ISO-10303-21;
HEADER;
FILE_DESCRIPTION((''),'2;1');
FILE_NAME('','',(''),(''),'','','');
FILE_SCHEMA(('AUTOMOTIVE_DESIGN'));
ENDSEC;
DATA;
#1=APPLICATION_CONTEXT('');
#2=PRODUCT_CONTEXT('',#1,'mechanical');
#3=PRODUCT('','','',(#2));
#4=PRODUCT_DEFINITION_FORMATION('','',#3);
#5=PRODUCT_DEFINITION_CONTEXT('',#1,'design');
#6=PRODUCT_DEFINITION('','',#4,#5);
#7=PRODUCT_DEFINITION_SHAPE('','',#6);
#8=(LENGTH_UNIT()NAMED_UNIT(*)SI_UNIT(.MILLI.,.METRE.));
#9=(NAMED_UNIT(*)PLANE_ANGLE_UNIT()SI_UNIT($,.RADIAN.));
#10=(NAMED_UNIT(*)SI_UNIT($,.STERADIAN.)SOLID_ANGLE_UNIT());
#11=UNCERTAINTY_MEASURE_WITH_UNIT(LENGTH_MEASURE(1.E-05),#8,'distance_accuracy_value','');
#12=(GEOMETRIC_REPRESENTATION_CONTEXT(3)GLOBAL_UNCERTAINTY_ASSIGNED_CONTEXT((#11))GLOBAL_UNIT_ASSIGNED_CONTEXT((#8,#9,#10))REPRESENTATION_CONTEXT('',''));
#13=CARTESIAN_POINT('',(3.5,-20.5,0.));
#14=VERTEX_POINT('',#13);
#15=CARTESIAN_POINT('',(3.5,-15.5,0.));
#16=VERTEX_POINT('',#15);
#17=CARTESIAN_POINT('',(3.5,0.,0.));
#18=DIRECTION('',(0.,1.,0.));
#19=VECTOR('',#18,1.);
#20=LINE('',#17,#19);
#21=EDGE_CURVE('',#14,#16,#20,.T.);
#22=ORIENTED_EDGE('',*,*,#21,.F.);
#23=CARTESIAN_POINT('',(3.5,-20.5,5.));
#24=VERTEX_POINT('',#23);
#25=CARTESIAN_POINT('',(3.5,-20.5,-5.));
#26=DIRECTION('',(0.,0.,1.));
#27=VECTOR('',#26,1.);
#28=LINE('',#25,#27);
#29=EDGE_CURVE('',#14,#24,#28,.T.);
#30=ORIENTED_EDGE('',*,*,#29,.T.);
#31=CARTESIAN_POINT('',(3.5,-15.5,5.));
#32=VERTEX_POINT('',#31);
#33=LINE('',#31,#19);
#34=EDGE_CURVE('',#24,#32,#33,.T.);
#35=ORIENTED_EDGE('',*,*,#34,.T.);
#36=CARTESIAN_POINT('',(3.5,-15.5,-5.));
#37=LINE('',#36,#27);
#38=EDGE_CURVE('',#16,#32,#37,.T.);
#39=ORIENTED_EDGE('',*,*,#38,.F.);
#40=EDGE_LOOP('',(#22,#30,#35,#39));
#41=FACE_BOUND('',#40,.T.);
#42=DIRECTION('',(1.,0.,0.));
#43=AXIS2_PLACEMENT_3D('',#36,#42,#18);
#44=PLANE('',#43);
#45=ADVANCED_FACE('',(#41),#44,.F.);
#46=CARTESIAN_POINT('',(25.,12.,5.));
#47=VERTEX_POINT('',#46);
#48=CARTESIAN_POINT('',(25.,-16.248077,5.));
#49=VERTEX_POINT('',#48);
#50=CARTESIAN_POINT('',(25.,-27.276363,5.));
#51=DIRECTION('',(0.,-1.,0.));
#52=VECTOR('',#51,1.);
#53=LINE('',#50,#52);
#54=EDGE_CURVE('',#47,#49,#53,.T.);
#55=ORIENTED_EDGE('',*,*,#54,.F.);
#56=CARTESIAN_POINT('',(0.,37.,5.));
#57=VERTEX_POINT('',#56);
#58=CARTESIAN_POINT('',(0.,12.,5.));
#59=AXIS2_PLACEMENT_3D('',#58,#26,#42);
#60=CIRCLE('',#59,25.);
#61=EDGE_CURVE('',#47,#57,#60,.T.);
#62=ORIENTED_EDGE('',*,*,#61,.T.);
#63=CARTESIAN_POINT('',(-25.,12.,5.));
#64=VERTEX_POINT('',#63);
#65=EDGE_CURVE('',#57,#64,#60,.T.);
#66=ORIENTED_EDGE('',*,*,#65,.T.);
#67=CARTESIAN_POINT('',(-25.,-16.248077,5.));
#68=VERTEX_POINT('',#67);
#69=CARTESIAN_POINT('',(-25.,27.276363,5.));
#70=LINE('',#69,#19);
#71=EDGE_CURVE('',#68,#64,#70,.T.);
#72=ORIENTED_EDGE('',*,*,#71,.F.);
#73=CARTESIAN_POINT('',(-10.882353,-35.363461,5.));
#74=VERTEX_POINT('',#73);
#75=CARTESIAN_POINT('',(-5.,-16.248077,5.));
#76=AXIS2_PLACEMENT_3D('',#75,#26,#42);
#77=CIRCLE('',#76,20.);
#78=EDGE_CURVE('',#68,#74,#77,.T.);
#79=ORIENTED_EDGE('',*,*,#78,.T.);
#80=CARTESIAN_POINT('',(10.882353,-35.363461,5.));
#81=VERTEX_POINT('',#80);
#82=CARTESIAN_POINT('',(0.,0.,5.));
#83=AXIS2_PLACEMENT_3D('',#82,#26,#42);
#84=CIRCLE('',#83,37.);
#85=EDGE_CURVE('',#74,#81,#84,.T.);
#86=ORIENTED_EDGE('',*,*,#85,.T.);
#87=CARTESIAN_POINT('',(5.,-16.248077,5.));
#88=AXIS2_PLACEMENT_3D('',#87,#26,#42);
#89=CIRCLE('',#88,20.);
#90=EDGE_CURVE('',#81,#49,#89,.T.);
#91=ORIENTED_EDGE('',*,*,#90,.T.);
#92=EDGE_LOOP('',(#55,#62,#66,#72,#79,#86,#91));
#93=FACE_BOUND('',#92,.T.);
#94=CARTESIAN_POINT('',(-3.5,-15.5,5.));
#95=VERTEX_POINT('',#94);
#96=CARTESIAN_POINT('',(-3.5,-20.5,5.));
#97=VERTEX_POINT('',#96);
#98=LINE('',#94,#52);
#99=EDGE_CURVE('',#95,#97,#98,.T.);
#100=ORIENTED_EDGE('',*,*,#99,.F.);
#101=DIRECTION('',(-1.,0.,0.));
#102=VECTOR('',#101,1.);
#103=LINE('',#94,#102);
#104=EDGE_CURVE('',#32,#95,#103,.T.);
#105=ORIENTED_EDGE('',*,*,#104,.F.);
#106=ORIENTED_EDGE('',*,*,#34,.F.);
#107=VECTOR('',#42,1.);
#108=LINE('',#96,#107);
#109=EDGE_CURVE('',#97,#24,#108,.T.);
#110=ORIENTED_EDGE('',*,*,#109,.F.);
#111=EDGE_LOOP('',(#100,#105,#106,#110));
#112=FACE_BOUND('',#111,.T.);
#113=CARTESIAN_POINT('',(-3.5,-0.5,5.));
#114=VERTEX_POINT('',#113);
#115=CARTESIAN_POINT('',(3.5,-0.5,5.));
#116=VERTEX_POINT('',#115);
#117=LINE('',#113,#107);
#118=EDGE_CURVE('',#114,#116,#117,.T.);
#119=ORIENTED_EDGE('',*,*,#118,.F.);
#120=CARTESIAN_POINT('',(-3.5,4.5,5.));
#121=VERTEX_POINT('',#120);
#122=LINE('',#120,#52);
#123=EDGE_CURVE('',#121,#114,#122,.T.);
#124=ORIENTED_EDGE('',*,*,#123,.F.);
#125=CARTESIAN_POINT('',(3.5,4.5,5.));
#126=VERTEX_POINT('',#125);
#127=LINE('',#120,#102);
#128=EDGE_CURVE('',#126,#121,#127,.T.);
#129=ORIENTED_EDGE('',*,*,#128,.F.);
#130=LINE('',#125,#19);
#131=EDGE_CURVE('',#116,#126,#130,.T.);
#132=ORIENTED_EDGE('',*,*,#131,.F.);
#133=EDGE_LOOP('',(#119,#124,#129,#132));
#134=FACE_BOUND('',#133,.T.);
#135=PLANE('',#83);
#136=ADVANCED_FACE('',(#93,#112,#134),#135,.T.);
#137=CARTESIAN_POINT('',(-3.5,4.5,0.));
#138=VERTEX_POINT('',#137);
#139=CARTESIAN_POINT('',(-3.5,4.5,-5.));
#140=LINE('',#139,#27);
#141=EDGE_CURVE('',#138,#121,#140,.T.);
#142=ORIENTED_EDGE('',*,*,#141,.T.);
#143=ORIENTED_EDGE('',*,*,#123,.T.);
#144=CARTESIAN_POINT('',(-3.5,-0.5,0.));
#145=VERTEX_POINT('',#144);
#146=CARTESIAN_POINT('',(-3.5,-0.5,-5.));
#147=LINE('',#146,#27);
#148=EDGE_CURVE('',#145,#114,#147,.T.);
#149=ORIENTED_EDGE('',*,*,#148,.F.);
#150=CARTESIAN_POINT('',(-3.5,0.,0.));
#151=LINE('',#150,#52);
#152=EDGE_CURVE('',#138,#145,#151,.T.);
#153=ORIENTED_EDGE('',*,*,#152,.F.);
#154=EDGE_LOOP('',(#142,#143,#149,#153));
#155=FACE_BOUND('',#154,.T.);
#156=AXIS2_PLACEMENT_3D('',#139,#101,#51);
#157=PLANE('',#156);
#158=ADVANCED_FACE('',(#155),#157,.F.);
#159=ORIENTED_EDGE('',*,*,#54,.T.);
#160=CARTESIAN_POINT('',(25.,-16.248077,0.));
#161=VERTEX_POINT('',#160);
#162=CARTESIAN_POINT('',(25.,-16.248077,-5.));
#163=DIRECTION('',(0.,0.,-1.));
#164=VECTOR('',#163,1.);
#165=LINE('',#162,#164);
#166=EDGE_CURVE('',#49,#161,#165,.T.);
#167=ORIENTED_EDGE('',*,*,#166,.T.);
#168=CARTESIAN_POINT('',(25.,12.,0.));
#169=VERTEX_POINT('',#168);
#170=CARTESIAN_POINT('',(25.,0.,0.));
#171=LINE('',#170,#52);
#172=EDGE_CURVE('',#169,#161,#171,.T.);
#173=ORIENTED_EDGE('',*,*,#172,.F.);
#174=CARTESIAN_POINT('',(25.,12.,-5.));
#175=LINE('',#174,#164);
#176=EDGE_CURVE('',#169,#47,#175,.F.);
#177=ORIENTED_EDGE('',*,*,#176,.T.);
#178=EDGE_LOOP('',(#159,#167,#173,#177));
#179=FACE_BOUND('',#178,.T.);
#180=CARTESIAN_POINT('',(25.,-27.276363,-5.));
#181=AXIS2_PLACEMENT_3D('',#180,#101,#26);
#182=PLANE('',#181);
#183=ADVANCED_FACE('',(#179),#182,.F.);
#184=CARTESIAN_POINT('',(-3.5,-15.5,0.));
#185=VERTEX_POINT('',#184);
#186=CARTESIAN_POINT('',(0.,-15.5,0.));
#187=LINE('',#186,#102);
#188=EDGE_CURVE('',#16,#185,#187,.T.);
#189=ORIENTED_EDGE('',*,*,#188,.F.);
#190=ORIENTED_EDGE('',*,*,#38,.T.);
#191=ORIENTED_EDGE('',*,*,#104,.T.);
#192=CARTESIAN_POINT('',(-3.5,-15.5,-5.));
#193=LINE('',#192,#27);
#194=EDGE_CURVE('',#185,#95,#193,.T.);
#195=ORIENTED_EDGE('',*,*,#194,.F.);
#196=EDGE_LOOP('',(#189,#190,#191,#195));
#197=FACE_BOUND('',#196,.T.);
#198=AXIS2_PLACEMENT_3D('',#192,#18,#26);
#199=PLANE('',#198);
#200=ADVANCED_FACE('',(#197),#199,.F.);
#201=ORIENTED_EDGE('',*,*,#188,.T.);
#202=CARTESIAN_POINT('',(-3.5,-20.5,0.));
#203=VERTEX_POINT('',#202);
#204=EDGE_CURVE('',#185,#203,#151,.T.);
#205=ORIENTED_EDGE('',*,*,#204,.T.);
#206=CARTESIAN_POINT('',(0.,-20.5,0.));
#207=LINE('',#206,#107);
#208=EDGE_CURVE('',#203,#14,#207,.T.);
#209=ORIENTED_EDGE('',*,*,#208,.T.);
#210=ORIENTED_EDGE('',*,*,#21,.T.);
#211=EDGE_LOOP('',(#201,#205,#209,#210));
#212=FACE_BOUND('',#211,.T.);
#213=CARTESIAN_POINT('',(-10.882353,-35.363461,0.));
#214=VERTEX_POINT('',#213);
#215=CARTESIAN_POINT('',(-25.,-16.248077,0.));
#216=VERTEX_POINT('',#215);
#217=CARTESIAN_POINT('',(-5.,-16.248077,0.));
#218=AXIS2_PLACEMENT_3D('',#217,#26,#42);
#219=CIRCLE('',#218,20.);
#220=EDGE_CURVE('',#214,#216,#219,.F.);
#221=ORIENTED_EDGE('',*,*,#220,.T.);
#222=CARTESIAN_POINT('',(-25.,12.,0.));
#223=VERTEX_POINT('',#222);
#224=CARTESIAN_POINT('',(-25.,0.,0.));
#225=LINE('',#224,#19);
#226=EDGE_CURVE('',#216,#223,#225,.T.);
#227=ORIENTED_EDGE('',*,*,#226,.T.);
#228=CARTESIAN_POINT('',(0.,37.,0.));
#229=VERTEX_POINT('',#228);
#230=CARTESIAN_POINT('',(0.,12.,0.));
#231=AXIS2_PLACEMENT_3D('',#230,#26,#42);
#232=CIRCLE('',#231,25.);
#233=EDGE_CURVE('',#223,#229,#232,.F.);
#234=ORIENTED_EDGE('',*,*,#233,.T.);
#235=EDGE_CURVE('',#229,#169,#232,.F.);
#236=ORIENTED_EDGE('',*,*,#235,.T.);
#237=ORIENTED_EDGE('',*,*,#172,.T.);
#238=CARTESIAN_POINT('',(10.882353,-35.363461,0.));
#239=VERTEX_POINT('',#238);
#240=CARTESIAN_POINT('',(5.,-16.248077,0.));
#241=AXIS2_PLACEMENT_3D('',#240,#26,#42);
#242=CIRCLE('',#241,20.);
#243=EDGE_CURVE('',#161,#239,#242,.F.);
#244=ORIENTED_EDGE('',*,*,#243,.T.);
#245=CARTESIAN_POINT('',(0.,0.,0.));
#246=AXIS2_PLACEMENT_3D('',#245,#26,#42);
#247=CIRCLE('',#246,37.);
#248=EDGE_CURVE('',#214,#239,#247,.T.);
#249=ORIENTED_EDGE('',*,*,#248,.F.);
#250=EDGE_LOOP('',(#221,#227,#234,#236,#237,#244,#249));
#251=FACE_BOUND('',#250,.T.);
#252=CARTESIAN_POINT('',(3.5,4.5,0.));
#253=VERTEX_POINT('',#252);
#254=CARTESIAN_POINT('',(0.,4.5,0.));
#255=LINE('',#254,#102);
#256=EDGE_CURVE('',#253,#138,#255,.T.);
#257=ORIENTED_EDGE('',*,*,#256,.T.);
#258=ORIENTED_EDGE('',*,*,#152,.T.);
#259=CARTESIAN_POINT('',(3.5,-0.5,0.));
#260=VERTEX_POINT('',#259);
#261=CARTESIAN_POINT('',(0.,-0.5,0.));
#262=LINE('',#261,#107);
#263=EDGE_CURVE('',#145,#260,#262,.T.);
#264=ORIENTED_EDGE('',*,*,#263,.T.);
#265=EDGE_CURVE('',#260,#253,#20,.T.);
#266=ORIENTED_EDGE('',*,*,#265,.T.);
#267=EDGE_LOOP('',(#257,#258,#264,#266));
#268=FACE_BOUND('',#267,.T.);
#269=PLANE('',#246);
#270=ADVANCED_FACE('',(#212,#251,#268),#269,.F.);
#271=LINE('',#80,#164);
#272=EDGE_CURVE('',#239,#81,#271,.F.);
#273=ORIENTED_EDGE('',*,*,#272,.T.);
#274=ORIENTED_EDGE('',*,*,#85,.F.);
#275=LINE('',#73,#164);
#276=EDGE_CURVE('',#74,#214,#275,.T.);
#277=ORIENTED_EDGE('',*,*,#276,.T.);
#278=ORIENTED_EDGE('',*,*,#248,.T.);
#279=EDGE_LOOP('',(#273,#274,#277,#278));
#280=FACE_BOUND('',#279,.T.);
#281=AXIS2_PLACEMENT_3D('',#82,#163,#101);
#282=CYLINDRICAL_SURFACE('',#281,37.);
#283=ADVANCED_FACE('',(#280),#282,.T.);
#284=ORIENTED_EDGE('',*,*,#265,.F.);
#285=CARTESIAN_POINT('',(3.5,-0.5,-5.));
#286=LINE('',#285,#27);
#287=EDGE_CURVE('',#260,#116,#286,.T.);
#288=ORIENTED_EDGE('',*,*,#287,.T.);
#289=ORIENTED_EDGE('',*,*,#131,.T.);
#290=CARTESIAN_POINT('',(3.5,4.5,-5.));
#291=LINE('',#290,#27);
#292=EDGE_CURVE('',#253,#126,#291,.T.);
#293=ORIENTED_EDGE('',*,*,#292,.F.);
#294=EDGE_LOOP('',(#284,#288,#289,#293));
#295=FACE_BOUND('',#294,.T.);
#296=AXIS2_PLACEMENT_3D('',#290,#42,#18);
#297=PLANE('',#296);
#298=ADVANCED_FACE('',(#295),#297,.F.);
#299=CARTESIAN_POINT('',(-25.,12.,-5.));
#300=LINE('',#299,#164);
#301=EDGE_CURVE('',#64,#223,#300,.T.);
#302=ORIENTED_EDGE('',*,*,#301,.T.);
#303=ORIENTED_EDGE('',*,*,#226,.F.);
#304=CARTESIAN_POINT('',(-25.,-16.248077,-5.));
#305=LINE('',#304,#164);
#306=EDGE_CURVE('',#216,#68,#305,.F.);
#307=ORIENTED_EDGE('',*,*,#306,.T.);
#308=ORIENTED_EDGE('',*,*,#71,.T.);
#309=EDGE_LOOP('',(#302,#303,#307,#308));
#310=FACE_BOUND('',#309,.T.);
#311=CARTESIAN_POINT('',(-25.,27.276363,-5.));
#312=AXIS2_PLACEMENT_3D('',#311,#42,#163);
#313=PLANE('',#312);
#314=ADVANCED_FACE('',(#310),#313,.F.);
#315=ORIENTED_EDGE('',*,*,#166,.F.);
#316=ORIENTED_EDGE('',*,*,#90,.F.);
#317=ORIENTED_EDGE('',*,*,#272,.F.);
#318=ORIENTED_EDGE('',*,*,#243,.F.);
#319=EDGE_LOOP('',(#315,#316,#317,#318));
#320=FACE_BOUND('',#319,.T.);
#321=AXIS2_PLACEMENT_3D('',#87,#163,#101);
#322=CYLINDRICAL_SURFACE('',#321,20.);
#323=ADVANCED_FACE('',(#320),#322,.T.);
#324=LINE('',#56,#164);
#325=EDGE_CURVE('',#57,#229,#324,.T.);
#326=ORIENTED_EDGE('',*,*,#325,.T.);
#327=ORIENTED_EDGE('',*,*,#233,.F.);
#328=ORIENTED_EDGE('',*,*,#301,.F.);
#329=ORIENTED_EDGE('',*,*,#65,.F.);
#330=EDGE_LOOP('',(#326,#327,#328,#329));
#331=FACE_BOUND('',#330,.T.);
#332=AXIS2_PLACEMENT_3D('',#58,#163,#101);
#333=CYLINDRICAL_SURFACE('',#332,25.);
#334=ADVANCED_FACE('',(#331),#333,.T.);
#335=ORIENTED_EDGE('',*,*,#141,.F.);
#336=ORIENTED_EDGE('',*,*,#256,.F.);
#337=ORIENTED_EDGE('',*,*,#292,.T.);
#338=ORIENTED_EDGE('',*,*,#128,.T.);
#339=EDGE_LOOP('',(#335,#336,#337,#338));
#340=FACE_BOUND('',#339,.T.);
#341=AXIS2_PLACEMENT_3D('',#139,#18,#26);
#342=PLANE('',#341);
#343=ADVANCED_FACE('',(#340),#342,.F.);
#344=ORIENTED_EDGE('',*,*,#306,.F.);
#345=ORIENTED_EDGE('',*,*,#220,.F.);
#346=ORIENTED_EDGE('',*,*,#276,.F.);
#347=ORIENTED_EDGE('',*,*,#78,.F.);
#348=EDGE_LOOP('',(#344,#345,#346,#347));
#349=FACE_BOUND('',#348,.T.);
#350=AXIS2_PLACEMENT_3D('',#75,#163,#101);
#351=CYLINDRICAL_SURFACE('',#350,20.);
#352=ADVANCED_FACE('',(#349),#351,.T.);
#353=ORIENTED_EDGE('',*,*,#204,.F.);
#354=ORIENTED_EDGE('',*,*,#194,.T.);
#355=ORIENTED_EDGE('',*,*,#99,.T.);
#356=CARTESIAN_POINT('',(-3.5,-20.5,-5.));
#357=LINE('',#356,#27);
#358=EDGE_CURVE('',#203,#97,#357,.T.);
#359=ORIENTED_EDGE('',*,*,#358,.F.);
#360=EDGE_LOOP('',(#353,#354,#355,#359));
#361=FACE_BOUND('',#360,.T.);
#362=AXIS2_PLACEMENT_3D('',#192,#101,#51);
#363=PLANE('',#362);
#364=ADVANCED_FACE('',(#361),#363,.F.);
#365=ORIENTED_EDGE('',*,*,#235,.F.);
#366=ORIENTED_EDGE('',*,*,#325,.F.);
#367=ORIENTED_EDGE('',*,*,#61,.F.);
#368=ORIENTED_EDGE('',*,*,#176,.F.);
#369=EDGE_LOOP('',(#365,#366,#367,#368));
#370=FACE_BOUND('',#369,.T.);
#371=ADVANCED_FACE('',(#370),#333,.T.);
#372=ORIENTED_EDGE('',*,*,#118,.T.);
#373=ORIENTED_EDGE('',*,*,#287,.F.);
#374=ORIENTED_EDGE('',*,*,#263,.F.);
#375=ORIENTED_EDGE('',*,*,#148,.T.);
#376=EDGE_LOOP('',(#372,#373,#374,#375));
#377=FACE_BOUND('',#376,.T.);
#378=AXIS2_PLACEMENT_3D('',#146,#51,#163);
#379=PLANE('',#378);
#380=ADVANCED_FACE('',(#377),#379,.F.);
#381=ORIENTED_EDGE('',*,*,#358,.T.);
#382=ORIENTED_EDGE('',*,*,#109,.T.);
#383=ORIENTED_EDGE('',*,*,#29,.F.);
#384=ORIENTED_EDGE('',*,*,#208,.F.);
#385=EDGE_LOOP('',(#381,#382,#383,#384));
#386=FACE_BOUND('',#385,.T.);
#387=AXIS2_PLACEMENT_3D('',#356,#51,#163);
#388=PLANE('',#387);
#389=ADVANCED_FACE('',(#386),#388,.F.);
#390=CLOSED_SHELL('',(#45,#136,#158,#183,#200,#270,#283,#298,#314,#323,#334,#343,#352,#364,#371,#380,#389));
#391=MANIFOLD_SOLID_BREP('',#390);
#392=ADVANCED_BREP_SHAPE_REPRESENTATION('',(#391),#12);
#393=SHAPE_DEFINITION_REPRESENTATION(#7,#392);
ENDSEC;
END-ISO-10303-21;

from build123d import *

# Parameters (mm, degrees)
SKETCH1_R           = 37
BOSS_EXTRUDE1_DEPTH = 5
CUT_EXTRUDE3_START  = -10
CUT_EXTRUDE3_DEPTH  = 10
FILLET1_R           = 25
FILLET2_R           = 20
SKETCH11_W          = 7
SKETCH11_H          = 5
CUT_EXTRUDE4_DEPTH  = 10


with BuildPart() as part:
    # Sketch1 → Boss-Extrude1 (new body)
    with BuildSketch(Plane.XY):
        Circle(SKETCH1_R)
    extrude(amount=BOSS_EXTRUDE1_DEPTH)

    # Sketch10 → Cut-Extrude3 (cut)
    with BuildSketch(Plane.XY.offset(5).offset(CUT_EXTRUDE3_START)):
        with BuildLine():
            Line((-25, 27.276363394), (-25, -27.276363394))
            ThreePointArc((-25, -27.276363394), (-37, 0), (-25, 27.276363394))
        make_face()
        with BuildLine():
            Line((25, -27.276363394), (25, 27.276363394))
            ThreePointArc((25, 27.276363394), (37, 0), (25, -27.276363394))
        make_face()
    extrude(amount=CUT_EXTRUDE3_DEPTH, mode=Mode.SUBTRACT)

    # Fillet1
    fillet1_edges = [part.edges().sort_by_distance(p)[0] for p in [
        (-25, 27.276363394, 2.5),
        (25, 27.276363394, 2.5),
    ]]
    fillet(fillet1_edges, radius=FILLET1_R - 0.0001)  # a hair under: the kernel refuses the full size

    # Fillet2
    fillet2_edges = [part.edges().sort_by_distance(p)[0] for p in [
        (-25, -27.276363394, 2.5),
        (25, -27.276363394, 2.5),
    ]]
    fillet(fillet2_edges, radius=FILLET2_R)

    # Sketch11 → Cut-Extrude4 (cut)
    with BuildSketch(Plane.XY.offset(5)):
        with Locations((0, 2)):
            Rectangle(SKETCH11_W, SKETCH11_H)
        with Locations((0, -18)):
            Rectangle(SKETCH11_W, SKETCH11_H)
    extrude(amount=-CUT_EXTRUDE4_DEPTH, mode=Mode.SUBTRACT)


solid = part.part
